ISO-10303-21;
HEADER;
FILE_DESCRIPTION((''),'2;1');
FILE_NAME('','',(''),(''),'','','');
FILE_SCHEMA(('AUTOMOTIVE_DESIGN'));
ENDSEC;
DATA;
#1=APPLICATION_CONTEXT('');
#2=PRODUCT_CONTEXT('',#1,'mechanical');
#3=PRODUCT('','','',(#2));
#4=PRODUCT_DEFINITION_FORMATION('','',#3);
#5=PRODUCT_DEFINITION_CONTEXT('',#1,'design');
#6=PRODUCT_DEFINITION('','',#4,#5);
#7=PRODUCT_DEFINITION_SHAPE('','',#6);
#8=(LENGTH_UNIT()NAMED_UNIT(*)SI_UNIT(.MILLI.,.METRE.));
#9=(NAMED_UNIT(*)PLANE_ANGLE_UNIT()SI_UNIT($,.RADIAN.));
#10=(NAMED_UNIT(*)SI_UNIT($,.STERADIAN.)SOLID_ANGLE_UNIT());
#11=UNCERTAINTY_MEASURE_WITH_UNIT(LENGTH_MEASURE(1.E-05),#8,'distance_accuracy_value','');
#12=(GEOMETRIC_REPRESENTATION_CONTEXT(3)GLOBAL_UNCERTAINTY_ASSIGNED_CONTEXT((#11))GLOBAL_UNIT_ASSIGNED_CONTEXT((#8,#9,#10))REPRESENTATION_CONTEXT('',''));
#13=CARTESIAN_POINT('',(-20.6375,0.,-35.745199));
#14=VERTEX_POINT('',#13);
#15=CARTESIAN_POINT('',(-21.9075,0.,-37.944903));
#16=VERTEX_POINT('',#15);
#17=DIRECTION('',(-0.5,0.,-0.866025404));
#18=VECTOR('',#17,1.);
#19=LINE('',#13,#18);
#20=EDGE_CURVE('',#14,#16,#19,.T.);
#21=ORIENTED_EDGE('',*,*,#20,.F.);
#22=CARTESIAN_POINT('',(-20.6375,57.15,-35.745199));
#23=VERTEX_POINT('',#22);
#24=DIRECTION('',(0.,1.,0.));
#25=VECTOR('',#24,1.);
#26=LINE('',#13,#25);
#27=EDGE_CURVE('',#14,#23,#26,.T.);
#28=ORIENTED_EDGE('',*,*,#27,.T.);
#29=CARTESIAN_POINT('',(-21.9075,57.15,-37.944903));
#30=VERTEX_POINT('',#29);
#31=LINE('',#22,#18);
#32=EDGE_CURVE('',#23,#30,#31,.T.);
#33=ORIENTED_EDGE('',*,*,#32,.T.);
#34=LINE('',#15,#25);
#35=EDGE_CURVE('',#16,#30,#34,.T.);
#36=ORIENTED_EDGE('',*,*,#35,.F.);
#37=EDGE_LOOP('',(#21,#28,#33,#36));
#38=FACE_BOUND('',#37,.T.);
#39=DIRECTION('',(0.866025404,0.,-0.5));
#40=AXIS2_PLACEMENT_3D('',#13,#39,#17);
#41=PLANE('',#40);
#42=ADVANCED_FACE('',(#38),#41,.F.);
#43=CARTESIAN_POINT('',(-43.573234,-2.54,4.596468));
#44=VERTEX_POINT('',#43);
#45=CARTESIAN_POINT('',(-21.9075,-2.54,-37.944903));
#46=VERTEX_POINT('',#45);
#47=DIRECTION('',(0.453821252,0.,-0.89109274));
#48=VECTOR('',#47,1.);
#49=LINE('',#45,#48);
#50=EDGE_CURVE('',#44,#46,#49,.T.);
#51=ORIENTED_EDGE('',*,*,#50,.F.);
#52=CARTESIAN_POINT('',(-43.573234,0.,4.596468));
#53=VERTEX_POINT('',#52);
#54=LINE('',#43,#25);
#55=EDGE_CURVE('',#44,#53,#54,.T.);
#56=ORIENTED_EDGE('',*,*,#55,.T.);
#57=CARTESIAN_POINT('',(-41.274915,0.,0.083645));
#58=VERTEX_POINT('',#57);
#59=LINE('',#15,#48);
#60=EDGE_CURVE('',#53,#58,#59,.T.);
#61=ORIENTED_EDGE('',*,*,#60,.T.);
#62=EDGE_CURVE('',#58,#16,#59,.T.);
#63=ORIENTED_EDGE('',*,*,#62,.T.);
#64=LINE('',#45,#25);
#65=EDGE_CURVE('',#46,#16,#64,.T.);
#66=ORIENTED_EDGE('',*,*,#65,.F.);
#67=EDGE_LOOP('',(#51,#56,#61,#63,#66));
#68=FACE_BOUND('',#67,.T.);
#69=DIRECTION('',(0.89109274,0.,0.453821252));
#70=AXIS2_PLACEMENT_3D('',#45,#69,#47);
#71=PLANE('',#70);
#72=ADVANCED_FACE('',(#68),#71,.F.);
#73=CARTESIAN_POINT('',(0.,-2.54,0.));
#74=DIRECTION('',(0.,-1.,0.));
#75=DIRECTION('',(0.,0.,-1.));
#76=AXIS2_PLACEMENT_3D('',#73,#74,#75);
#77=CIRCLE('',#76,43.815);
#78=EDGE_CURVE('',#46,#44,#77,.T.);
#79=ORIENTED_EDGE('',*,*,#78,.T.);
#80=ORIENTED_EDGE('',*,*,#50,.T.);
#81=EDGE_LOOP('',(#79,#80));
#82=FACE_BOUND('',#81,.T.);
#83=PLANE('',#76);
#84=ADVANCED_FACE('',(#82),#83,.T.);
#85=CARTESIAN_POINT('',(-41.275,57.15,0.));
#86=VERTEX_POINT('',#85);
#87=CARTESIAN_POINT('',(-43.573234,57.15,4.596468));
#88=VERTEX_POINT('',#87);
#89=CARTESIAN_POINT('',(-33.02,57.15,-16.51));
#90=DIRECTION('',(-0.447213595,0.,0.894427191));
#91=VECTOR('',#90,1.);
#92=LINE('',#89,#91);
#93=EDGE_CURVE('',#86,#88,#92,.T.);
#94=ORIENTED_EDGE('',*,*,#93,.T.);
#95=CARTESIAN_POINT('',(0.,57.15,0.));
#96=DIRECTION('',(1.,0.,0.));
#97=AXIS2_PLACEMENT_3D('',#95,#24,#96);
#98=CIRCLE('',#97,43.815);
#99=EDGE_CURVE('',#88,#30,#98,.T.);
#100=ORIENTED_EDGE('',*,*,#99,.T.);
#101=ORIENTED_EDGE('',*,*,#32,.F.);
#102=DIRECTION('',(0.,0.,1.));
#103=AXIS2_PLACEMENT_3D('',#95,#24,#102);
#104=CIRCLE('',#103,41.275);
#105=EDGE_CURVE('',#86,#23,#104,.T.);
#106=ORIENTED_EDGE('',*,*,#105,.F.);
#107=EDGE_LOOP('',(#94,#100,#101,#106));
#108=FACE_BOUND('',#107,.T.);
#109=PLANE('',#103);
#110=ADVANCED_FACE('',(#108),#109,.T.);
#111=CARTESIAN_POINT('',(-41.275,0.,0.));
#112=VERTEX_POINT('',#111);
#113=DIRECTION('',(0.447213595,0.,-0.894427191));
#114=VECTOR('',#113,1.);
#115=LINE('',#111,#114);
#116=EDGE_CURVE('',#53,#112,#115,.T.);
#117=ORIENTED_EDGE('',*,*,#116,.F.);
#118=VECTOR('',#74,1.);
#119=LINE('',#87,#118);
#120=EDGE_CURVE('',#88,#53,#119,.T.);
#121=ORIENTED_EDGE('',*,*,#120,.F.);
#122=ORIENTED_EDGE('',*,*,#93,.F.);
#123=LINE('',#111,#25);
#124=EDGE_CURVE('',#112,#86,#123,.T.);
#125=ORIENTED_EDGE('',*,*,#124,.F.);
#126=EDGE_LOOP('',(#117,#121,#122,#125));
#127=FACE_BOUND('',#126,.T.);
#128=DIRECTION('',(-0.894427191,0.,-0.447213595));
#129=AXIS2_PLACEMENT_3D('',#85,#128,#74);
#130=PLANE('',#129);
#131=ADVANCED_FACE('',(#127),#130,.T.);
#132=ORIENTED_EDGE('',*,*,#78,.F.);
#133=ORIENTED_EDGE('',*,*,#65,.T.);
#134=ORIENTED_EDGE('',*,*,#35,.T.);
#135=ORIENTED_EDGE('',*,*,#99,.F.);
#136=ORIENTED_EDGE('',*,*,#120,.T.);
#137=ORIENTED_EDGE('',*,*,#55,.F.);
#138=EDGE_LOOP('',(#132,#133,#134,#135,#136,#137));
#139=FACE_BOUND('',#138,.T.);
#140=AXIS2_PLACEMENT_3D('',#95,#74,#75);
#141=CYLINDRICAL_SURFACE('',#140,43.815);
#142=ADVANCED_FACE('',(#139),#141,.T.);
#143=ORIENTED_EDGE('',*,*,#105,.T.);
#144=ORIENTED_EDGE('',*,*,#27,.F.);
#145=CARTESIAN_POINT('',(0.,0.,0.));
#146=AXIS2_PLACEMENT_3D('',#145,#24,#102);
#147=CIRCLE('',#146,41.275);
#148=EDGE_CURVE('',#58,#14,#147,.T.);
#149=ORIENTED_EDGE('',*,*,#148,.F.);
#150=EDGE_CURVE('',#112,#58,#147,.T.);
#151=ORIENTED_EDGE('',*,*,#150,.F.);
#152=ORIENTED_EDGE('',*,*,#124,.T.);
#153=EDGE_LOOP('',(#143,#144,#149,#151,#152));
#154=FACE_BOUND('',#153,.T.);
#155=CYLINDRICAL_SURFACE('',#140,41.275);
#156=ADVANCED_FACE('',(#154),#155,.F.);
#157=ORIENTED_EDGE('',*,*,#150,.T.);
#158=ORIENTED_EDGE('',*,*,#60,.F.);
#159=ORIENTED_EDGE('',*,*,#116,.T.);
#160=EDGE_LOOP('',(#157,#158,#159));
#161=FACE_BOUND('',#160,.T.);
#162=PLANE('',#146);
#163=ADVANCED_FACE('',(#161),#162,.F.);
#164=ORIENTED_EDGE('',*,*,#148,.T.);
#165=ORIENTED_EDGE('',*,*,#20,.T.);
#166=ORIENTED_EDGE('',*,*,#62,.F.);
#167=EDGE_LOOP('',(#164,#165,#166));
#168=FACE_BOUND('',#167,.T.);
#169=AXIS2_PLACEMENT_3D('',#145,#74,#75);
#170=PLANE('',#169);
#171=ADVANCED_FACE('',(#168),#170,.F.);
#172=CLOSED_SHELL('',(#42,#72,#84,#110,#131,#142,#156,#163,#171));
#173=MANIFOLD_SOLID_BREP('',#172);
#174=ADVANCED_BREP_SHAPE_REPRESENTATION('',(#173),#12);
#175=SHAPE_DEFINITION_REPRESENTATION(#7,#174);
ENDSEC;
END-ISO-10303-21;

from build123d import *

# Parameters (mm, degrees)
SKETCH1_R           = 43.815
SKETCH1_R_2         = 41.275
EXTRUDE_THIN1_DEPTH = 57.15
CUT_EXTRUDE12_DEPTH = 85.29490465
CHAMFER1_SIZE       = 2.54
BOSS_EXTRUDE1_START = 2.54
BOSS_EXTRUDE1_DEPTH = 2.54


with BuildPart() as part:
    # Sketch1 → Extrude-Thin1 (new body)
    with BuildSketch(Plane(origin=(0, 0, 0), x_dir=(1, 0, 0), z_dir=(0, 1, 0))):
        Circle(SKETCH1_R)
        Circle(SKETCH1_R_2, mode=Mode.SUBTRACT)
    extrude(amount=EXTRUDE_THIN1_DEPTH)

    # Sketch4 → Cut-Extrude12 (cut, through all)
    with BuildSketch(Plane(origin=(0, 57.15, 0), x_dir=(1, 0, 0), z_dir=(0, 1, 0))):
        with BuildLine():
            Line((-41.275, 0), (-43.815, 0))
            ThreePointArc((-43.815, 0), (-37.944903067, 21.9075), (-21.9075, 37.944903067))
            Line((-21.9075, 37.944903067), (-20.6375, 35.745198541))
            ThreePointArc((-20.6375, 35.745198541), (-35.745198541, 20.6375), (-41.275, 0))
        make_face()
    extrude(amount=-CUT_EXTRUDE12_DEPTH, mode=Mode.SUBTRACT)

    # Chamfer1
    # the kernel refuses this chamfer: 5.08, 2.54 mm, written as the material it takes off along each edge
    with BuildSketch(Plane(origin=(-43.815, 69.10149318, 0), x_dir=(0.0525256370506935, 0, 0.998619575940918), z_dir=(0, -1, 0))) as chamfer1_piece_1:
        with BuildLine():
            Line((4.602821575, 0), (CHAMFER1_SIZE * 0.0525256370507, -CHAMFER1_SIZE * 0.998619575941))
            Line((CHAMFER1_SIZE * 0.0525256370507, -CHAMFER1_SIZE * 0.998619575941), (0, 0))
            ThreePointArc((0, 0), (2.389793213, 0.060394139), (4.602821575, 0))
        make_face()
    extrude(amount=81.05298636, mode=Mode.SUBTRACT)

    # Sketch5 → Boss-Extrude1 (add)
    with BuildSketch(Plane.XZ.offset(BOSS_EXTRUDE1_START)):
        with BuildLine():
            Line((-21.9075, -37.944903067), (-43.573233865, 4.596467729))
            ThreePointArc((-43.573233865, 4.596467729), (39.043228403, 19.884178154), (-21.9075, -37.944903067))
        make_face()
    extrude(amount=-BOSS_EXTRUDE1_DEPTH)


solid = part.part
